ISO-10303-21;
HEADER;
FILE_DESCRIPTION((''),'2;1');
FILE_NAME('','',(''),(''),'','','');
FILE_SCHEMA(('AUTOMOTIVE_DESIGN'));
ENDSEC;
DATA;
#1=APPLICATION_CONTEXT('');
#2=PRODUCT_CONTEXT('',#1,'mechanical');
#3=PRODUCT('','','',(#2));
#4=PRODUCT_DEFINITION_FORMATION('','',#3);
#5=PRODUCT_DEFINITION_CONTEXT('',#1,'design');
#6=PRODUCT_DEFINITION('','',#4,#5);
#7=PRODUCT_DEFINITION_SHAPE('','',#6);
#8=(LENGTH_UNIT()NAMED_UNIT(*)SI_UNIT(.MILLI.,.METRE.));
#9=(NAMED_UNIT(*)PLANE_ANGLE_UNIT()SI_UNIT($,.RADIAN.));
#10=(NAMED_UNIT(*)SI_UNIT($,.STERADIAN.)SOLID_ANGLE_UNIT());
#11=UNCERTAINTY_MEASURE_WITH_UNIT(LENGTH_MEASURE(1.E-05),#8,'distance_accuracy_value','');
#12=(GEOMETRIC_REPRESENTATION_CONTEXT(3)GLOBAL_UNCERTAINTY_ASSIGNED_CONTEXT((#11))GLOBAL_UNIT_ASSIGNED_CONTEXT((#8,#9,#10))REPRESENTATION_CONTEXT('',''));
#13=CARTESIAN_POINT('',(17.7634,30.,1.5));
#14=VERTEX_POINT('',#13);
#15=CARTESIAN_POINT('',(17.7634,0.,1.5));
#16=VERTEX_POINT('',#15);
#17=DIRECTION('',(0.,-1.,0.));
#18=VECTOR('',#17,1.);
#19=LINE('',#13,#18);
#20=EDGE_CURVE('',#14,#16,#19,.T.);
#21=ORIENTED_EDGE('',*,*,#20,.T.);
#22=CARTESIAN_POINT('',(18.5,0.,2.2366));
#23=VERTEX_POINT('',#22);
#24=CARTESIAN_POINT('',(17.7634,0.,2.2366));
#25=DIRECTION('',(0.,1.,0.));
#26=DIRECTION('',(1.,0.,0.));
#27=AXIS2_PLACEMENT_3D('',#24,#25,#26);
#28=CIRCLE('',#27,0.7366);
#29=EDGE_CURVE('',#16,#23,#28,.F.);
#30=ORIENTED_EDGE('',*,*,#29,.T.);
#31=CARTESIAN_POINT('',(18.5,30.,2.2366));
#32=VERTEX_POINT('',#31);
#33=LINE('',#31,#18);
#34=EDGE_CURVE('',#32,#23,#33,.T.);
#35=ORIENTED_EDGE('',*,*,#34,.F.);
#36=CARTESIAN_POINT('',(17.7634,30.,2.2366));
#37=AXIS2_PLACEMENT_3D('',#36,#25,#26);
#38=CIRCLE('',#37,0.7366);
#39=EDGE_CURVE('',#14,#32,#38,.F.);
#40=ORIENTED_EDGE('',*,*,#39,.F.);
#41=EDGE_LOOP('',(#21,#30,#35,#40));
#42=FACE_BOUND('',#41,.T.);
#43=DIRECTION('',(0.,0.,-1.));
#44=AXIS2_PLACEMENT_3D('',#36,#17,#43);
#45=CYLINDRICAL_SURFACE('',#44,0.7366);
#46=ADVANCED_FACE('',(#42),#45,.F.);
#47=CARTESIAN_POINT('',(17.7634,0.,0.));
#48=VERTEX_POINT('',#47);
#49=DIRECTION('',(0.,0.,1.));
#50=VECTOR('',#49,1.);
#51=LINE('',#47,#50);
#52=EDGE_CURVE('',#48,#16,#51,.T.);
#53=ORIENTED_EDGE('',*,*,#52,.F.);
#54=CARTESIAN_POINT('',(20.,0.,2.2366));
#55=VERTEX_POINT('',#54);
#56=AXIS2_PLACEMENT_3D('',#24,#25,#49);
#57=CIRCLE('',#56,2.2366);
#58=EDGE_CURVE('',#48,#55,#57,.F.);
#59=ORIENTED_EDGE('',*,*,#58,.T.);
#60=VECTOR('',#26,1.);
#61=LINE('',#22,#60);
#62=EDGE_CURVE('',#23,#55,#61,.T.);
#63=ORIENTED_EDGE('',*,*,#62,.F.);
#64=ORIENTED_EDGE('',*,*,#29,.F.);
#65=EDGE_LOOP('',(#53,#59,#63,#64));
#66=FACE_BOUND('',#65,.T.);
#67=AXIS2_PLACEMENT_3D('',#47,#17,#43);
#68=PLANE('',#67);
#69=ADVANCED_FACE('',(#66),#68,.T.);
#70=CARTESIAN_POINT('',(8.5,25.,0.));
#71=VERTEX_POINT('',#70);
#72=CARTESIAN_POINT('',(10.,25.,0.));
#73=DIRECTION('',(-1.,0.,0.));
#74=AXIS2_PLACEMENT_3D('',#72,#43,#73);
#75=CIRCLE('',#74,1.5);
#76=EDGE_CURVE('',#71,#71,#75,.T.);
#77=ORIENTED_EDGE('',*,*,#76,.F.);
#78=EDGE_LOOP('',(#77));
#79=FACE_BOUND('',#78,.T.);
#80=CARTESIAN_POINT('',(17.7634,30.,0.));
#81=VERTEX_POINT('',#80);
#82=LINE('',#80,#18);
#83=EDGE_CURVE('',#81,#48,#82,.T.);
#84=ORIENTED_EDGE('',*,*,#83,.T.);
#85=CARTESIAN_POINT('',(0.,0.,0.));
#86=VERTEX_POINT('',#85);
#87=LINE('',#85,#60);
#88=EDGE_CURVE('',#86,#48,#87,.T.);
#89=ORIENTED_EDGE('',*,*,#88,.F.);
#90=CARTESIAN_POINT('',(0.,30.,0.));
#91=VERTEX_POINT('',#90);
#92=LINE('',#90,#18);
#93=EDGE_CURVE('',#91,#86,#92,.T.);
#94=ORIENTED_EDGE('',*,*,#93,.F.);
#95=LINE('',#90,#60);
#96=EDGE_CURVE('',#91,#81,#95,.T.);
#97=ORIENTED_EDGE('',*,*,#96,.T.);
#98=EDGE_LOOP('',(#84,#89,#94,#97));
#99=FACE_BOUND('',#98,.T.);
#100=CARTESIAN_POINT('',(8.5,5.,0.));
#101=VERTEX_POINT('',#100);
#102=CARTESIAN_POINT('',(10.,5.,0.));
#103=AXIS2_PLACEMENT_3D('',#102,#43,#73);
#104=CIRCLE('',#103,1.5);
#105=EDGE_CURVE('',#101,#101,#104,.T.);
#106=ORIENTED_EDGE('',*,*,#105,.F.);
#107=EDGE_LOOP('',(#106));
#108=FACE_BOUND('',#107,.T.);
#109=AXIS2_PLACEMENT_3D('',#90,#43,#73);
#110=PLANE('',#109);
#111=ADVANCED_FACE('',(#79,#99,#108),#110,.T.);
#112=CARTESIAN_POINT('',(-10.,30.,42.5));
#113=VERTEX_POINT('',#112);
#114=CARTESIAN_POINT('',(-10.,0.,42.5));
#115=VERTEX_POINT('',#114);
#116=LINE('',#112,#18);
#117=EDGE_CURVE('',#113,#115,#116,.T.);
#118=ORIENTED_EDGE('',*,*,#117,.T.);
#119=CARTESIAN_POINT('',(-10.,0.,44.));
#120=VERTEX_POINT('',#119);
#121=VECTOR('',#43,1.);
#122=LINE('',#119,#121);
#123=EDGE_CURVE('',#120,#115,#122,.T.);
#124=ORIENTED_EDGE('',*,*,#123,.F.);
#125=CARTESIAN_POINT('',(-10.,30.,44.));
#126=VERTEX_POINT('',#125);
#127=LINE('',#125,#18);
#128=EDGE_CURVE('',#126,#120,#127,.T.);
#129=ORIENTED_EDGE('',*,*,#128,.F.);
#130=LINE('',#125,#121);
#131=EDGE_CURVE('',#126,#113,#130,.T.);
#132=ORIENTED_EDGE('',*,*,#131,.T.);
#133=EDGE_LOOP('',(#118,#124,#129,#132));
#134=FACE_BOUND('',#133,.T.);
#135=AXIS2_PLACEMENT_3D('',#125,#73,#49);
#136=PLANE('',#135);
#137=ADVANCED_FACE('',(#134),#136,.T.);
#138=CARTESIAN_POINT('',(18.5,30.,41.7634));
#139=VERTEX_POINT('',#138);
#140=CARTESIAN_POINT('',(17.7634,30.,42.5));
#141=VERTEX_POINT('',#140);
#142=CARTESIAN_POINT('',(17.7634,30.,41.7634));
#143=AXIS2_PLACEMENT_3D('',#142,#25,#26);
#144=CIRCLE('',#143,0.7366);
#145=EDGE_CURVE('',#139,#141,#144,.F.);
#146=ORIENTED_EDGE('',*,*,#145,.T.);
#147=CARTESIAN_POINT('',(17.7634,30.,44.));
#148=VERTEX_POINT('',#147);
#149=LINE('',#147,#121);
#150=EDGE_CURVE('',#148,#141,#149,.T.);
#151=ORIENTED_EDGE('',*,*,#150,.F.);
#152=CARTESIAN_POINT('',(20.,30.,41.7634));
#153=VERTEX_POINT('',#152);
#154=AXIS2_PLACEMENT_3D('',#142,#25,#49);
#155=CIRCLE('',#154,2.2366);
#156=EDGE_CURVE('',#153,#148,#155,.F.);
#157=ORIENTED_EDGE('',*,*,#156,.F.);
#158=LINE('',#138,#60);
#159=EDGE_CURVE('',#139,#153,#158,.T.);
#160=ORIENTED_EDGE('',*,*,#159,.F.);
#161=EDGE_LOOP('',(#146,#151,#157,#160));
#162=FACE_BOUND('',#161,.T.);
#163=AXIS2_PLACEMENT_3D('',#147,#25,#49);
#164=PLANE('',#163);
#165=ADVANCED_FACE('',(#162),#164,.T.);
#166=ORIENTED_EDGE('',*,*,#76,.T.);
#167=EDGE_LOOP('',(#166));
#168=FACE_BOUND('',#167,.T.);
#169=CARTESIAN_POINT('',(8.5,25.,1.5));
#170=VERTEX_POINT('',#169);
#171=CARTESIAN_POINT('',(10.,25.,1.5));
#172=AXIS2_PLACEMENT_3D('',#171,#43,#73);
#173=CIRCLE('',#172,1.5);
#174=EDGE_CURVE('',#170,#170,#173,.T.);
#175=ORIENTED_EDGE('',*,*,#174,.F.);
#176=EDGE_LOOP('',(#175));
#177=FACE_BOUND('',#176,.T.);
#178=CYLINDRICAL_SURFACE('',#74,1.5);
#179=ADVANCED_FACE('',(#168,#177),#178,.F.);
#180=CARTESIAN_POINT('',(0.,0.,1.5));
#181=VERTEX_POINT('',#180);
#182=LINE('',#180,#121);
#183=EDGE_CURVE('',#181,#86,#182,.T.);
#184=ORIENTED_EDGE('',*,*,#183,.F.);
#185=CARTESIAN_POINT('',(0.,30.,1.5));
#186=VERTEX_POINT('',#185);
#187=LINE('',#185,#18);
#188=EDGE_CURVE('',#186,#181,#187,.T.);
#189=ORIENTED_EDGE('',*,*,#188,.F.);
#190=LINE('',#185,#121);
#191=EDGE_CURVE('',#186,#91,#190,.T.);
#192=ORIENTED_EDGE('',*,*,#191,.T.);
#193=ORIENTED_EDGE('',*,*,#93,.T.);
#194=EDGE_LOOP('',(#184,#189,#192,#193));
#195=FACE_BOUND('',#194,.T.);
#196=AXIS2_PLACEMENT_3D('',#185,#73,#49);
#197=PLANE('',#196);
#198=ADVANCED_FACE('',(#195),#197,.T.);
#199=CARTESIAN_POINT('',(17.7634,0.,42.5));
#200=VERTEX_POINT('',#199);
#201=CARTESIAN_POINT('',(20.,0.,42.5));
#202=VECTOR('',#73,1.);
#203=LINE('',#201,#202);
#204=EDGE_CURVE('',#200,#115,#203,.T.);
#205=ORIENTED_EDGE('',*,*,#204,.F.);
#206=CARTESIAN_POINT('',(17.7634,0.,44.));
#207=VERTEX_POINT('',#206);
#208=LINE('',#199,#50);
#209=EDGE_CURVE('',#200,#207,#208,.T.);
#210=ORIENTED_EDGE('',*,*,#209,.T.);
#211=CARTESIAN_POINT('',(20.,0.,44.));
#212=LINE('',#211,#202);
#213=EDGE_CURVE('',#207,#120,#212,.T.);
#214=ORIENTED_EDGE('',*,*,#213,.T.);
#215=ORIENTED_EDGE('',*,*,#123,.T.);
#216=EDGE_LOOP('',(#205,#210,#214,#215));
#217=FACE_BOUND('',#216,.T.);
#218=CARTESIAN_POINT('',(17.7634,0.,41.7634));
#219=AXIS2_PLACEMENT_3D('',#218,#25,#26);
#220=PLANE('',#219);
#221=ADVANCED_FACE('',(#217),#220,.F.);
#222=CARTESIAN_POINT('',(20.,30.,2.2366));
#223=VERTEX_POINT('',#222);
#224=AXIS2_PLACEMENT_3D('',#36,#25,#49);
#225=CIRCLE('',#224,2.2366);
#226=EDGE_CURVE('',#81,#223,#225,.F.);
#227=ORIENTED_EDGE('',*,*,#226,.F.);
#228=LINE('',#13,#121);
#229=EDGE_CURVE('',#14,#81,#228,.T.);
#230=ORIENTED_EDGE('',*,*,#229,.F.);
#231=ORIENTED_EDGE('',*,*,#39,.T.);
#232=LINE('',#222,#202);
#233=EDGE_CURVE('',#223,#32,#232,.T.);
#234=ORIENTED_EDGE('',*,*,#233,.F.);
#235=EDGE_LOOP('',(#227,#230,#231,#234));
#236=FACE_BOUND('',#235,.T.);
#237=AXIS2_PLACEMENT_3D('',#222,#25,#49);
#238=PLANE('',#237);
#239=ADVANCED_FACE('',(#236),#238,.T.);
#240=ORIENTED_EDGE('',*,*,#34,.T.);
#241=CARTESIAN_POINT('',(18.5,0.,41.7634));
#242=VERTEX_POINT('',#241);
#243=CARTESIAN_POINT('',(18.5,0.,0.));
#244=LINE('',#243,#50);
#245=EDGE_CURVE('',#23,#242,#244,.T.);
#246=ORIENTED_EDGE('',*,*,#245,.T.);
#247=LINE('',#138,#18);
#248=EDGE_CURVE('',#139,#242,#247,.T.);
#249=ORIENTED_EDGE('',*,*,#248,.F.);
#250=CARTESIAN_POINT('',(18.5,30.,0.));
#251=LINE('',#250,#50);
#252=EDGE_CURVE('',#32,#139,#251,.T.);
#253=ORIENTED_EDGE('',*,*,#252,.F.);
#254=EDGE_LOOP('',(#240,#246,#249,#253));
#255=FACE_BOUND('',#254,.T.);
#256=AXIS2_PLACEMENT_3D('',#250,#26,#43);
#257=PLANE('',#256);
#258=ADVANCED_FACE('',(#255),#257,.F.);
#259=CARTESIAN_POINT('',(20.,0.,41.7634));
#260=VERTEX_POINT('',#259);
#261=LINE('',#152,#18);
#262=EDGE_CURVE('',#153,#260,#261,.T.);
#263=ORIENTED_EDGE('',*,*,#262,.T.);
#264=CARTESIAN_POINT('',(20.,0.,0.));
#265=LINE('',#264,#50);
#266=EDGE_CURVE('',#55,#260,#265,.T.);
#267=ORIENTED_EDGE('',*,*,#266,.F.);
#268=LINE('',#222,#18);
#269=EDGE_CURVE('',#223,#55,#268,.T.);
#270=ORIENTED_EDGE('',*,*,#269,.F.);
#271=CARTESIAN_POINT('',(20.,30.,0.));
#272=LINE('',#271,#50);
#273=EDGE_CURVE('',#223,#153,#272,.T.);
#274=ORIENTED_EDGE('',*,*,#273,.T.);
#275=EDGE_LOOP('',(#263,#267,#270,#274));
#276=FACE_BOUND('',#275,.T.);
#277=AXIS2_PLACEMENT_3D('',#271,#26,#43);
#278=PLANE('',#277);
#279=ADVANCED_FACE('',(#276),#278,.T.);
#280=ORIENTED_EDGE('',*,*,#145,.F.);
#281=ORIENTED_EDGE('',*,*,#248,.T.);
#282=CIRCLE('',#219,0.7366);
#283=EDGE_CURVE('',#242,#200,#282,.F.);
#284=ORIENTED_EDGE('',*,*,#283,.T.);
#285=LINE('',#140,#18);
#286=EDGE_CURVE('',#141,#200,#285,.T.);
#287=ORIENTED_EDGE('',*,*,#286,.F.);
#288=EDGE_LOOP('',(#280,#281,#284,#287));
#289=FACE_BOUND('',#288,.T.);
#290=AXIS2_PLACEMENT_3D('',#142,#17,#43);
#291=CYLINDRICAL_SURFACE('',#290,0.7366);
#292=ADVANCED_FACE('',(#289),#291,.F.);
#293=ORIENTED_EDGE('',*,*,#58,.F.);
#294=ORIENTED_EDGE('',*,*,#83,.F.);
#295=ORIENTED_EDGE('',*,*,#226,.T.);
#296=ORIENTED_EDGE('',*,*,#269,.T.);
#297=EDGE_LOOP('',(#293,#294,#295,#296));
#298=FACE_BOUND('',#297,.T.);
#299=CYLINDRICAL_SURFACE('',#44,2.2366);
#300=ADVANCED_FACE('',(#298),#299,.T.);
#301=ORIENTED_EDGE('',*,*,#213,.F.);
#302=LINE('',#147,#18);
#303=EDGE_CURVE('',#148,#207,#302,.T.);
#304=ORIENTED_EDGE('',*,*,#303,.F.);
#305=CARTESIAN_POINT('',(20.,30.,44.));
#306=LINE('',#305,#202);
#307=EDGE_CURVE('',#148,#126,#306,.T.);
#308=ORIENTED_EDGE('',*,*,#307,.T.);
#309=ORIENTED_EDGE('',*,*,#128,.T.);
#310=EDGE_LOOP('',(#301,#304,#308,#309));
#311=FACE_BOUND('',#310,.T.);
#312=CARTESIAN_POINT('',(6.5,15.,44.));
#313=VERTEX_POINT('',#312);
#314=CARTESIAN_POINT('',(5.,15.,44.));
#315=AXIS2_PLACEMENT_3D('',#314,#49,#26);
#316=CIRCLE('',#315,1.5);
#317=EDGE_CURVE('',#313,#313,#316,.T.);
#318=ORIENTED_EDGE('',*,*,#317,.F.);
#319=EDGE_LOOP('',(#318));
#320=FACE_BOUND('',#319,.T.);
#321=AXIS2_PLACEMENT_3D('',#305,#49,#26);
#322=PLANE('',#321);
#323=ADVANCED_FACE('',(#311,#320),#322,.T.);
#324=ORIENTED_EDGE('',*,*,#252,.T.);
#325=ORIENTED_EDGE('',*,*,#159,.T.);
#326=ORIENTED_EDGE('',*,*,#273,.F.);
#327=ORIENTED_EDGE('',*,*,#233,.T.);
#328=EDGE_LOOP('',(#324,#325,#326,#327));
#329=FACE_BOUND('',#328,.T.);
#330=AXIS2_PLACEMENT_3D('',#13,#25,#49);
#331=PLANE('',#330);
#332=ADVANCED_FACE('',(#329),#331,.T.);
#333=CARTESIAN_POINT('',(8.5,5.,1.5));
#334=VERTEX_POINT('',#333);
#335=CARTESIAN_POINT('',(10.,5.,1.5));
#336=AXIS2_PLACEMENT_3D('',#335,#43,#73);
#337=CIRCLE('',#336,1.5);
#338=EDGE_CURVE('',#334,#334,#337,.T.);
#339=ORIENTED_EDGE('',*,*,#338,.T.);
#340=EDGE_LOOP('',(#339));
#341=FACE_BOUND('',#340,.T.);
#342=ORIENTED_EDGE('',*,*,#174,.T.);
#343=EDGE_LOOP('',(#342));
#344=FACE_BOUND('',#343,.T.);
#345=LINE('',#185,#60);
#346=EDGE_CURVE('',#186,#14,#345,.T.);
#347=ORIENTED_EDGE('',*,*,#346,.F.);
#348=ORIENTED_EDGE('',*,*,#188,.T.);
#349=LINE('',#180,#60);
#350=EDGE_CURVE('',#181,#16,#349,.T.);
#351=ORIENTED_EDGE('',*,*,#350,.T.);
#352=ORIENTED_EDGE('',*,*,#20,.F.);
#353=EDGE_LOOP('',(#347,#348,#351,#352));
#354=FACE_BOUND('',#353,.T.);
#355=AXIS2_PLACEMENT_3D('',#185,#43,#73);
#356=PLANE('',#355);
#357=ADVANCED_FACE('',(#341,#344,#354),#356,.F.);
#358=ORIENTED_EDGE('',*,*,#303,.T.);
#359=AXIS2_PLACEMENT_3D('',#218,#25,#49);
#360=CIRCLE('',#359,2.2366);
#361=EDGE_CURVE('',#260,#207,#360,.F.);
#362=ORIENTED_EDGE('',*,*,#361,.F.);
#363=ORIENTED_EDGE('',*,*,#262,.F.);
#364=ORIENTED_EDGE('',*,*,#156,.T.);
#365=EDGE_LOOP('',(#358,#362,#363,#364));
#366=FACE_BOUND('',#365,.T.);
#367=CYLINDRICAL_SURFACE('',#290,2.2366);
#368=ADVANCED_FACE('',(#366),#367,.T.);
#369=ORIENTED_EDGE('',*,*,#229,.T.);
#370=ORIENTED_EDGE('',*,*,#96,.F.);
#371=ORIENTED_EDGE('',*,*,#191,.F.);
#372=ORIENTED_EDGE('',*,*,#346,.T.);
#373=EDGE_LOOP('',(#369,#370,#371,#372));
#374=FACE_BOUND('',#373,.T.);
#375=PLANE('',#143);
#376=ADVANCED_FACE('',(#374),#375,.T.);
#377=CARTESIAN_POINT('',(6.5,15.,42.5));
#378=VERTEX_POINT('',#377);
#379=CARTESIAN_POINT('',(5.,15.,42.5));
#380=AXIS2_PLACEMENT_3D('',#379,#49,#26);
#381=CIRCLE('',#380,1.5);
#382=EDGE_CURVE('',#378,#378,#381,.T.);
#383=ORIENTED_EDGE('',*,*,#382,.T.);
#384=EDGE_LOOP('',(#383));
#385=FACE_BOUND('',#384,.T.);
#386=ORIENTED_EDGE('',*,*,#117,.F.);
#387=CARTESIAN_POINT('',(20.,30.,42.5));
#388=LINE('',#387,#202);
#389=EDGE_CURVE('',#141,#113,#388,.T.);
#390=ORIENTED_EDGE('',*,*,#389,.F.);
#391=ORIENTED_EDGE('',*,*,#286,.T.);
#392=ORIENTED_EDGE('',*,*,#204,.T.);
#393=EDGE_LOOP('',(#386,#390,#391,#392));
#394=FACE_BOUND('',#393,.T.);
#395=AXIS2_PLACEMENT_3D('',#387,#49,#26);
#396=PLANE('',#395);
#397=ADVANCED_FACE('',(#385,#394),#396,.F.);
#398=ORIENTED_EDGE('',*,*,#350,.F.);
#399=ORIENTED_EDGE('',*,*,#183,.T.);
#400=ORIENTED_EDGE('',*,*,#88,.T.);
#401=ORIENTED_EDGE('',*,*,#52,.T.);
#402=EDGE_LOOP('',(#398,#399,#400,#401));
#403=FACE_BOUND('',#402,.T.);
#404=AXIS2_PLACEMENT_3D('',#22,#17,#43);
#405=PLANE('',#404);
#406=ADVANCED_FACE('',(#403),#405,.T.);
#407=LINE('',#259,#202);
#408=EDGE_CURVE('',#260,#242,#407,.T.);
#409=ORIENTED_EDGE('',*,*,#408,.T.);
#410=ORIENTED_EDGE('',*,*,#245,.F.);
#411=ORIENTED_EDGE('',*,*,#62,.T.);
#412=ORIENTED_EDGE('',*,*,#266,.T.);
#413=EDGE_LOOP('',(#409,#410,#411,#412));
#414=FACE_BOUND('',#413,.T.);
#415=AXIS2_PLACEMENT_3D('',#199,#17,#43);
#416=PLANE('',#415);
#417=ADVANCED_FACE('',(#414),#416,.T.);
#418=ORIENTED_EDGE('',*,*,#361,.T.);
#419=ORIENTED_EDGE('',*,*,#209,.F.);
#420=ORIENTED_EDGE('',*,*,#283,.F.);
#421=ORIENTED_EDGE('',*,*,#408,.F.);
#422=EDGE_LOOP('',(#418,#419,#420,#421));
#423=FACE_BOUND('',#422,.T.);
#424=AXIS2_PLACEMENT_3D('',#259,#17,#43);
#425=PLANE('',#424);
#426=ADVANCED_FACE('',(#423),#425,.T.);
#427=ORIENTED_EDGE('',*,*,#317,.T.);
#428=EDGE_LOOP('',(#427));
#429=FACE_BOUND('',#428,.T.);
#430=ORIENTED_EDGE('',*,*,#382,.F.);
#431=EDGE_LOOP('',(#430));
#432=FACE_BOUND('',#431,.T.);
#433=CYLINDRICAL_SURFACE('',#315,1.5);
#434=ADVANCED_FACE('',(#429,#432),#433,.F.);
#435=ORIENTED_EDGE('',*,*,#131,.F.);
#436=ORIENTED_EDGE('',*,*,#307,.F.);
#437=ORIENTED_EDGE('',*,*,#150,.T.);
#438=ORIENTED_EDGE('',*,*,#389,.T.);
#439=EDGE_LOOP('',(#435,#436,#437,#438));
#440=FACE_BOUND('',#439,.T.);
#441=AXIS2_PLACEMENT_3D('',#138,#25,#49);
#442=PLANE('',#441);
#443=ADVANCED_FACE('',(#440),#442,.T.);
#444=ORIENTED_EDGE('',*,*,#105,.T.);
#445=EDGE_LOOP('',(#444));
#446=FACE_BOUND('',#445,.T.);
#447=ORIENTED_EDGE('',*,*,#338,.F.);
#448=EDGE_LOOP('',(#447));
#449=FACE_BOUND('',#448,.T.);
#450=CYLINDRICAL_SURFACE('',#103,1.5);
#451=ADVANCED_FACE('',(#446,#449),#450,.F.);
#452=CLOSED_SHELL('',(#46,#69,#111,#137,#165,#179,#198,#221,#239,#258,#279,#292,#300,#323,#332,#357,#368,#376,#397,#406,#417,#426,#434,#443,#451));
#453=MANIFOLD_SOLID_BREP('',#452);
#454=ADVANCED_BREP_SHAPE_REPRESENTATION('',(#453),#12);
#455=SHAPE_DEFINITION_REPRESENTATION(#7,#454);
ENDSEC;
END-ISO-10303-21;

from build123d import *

# Parameters (mm, degrees)
BASE_FLANGE1_DEPTH                     = 30
F_3_0MM_TRANSITIONAL_DOWEL_HOLE1_D     = 3
F_3_0MM_TRANSITIONAL_DOWEL_HOLE1_DEPTH = 1.5
F_3_0MM_TRANSITIONAL_DOWEL_HOLE2_D     = 3
F_3_0MM_TRANSITIONAL_DOWEL_HOLE2_DEPTH = 1.5
F_3_0MM_PRESS_DOWEL_HOLE1_D            = 3
F_3_0MM_PRESS_DOWEL_HOLE1_DEPTH        = 6
F_3_0MM_PRESS_DOWEL_HOLE1_TIP          = 0.901290929


# Sheet-metal steps are written as plain solids
with BuildPart() as part:
    # Sketch1 → Base-Flange1 (new body)
    with BuildSketch(Plane(origin=(0, 0, 0), x_dir=(1, 0, 0), z_dir=(0, 1, 0))):
        with BuildLine():
            Line((0, 0), (17.7634, 0))
            ThreePointArc((17.7634, 0), (19.344915027, -0.655084973), (20, -2.2366))
            Line((20, -2.2366), (20, -41.7634))
            ThreePointArc((20, -41.7634), (19.344915027, -43.344915027), (17.7634, -44))
            Line((17.7634, -44), (-10, -44))
            Line((-10, -44), (-10, -42.5))
            Line((-10, -42.5), (17.7634, -42.5))
            ThreePointArc((17.7634, -42.5), (18.284254855, -42.284254855), (18.5, -41.7634))
            Line((18.5, -41.7634), (18.5, -2.2366))
            ThreePointArc((18.5, -2.2366), (18.284254855, -1.715745145), (17.7634, -1.5))
            Line((17.7634, -1.5), (0, -1.5))
            Line((0, -1.5), (0, 0))
        make_face()
    extrude(amount=BASE_FLANGE1_DEPTH)

    # Ø3.0mm Transitional Dowel Hole1
    with Locations(Plane(origin=(0, 0, 0), x_dir=(-1, 0, 0), z_dir=(0, 0, -1))):
        with Locations((-10, 25), (-10, 5)):
            Hole(F_3_0MM_TRANSITIONAL_DOWEL_HOLE1_D / 2, depth=F_3_0MM_TRANSITIONAL_DOWEL_HOLE1_DEPTH)

    # Ø3.0mm Transitional Dowel Hole2
    with Locations(Plane.XY.offset(44)):
        with Locations((5, 15)):
            Hole(F_3_0MM_TRANSITIONAL_DOWEL_HOLE2_D / 2, depth=F_3_0MM_TRANSITIONAL_DOWEL_HOLE2_DEPTH)

    # Ø3.0mm Press Dowel Hole1
    with Locations(Plane(origin=(146.531359221, 116.2862719, -6), x_dir=(0, -1, 0), z_dir=(0, 0, -1))):
        with Locations((220.525513363, 156.531359221), (102.525513363, 181.531359221), (102.525513363, 271.531359221), (89.19270005, 226.531359221), (210.525513363, 317.793651488), (230.525513363, 317.793651488), (252.525513363, 320.462332131), (232.525513363, 300.462332131), (252.525513363, 132.600386311), (232.525513363, 152.600386311), (111.286271896, 136.531359221), (91.286271896, 136.531359221), (41.525513363, 196.432813402), (13.525513363, 196.432813402), (41.525513363, 138.767959221), (13.525513363, 138.767959221), (41.525513363, 256.62990504), (13.525513363, 256.62990504), (41.525513363, 314.294759221), (13.525513363, 314.294759221)):
            Hole(F_3_0MM_PRESS_DOWEL_HOLE1_D / 2, depth=F_3_0MM_PRESS_DOWEL_HOLE1_DEPTH)
            with Locations((0, 0, -(F_3_0MM_PRESS_DOWEL_HOLE1_DEPTH + F_3_0MM_PRESS_DOWEL_HOLE1_TIP / 2))):  # 118° drill point
                Cone(0, F_3_0MM_PRESS_DOWEL_HOLE1_D / 2, F_3_0MM_PRESS_DOWEL_HOLE1_TIP, mode=Mode.SUBTRACT)


solid = part.part
